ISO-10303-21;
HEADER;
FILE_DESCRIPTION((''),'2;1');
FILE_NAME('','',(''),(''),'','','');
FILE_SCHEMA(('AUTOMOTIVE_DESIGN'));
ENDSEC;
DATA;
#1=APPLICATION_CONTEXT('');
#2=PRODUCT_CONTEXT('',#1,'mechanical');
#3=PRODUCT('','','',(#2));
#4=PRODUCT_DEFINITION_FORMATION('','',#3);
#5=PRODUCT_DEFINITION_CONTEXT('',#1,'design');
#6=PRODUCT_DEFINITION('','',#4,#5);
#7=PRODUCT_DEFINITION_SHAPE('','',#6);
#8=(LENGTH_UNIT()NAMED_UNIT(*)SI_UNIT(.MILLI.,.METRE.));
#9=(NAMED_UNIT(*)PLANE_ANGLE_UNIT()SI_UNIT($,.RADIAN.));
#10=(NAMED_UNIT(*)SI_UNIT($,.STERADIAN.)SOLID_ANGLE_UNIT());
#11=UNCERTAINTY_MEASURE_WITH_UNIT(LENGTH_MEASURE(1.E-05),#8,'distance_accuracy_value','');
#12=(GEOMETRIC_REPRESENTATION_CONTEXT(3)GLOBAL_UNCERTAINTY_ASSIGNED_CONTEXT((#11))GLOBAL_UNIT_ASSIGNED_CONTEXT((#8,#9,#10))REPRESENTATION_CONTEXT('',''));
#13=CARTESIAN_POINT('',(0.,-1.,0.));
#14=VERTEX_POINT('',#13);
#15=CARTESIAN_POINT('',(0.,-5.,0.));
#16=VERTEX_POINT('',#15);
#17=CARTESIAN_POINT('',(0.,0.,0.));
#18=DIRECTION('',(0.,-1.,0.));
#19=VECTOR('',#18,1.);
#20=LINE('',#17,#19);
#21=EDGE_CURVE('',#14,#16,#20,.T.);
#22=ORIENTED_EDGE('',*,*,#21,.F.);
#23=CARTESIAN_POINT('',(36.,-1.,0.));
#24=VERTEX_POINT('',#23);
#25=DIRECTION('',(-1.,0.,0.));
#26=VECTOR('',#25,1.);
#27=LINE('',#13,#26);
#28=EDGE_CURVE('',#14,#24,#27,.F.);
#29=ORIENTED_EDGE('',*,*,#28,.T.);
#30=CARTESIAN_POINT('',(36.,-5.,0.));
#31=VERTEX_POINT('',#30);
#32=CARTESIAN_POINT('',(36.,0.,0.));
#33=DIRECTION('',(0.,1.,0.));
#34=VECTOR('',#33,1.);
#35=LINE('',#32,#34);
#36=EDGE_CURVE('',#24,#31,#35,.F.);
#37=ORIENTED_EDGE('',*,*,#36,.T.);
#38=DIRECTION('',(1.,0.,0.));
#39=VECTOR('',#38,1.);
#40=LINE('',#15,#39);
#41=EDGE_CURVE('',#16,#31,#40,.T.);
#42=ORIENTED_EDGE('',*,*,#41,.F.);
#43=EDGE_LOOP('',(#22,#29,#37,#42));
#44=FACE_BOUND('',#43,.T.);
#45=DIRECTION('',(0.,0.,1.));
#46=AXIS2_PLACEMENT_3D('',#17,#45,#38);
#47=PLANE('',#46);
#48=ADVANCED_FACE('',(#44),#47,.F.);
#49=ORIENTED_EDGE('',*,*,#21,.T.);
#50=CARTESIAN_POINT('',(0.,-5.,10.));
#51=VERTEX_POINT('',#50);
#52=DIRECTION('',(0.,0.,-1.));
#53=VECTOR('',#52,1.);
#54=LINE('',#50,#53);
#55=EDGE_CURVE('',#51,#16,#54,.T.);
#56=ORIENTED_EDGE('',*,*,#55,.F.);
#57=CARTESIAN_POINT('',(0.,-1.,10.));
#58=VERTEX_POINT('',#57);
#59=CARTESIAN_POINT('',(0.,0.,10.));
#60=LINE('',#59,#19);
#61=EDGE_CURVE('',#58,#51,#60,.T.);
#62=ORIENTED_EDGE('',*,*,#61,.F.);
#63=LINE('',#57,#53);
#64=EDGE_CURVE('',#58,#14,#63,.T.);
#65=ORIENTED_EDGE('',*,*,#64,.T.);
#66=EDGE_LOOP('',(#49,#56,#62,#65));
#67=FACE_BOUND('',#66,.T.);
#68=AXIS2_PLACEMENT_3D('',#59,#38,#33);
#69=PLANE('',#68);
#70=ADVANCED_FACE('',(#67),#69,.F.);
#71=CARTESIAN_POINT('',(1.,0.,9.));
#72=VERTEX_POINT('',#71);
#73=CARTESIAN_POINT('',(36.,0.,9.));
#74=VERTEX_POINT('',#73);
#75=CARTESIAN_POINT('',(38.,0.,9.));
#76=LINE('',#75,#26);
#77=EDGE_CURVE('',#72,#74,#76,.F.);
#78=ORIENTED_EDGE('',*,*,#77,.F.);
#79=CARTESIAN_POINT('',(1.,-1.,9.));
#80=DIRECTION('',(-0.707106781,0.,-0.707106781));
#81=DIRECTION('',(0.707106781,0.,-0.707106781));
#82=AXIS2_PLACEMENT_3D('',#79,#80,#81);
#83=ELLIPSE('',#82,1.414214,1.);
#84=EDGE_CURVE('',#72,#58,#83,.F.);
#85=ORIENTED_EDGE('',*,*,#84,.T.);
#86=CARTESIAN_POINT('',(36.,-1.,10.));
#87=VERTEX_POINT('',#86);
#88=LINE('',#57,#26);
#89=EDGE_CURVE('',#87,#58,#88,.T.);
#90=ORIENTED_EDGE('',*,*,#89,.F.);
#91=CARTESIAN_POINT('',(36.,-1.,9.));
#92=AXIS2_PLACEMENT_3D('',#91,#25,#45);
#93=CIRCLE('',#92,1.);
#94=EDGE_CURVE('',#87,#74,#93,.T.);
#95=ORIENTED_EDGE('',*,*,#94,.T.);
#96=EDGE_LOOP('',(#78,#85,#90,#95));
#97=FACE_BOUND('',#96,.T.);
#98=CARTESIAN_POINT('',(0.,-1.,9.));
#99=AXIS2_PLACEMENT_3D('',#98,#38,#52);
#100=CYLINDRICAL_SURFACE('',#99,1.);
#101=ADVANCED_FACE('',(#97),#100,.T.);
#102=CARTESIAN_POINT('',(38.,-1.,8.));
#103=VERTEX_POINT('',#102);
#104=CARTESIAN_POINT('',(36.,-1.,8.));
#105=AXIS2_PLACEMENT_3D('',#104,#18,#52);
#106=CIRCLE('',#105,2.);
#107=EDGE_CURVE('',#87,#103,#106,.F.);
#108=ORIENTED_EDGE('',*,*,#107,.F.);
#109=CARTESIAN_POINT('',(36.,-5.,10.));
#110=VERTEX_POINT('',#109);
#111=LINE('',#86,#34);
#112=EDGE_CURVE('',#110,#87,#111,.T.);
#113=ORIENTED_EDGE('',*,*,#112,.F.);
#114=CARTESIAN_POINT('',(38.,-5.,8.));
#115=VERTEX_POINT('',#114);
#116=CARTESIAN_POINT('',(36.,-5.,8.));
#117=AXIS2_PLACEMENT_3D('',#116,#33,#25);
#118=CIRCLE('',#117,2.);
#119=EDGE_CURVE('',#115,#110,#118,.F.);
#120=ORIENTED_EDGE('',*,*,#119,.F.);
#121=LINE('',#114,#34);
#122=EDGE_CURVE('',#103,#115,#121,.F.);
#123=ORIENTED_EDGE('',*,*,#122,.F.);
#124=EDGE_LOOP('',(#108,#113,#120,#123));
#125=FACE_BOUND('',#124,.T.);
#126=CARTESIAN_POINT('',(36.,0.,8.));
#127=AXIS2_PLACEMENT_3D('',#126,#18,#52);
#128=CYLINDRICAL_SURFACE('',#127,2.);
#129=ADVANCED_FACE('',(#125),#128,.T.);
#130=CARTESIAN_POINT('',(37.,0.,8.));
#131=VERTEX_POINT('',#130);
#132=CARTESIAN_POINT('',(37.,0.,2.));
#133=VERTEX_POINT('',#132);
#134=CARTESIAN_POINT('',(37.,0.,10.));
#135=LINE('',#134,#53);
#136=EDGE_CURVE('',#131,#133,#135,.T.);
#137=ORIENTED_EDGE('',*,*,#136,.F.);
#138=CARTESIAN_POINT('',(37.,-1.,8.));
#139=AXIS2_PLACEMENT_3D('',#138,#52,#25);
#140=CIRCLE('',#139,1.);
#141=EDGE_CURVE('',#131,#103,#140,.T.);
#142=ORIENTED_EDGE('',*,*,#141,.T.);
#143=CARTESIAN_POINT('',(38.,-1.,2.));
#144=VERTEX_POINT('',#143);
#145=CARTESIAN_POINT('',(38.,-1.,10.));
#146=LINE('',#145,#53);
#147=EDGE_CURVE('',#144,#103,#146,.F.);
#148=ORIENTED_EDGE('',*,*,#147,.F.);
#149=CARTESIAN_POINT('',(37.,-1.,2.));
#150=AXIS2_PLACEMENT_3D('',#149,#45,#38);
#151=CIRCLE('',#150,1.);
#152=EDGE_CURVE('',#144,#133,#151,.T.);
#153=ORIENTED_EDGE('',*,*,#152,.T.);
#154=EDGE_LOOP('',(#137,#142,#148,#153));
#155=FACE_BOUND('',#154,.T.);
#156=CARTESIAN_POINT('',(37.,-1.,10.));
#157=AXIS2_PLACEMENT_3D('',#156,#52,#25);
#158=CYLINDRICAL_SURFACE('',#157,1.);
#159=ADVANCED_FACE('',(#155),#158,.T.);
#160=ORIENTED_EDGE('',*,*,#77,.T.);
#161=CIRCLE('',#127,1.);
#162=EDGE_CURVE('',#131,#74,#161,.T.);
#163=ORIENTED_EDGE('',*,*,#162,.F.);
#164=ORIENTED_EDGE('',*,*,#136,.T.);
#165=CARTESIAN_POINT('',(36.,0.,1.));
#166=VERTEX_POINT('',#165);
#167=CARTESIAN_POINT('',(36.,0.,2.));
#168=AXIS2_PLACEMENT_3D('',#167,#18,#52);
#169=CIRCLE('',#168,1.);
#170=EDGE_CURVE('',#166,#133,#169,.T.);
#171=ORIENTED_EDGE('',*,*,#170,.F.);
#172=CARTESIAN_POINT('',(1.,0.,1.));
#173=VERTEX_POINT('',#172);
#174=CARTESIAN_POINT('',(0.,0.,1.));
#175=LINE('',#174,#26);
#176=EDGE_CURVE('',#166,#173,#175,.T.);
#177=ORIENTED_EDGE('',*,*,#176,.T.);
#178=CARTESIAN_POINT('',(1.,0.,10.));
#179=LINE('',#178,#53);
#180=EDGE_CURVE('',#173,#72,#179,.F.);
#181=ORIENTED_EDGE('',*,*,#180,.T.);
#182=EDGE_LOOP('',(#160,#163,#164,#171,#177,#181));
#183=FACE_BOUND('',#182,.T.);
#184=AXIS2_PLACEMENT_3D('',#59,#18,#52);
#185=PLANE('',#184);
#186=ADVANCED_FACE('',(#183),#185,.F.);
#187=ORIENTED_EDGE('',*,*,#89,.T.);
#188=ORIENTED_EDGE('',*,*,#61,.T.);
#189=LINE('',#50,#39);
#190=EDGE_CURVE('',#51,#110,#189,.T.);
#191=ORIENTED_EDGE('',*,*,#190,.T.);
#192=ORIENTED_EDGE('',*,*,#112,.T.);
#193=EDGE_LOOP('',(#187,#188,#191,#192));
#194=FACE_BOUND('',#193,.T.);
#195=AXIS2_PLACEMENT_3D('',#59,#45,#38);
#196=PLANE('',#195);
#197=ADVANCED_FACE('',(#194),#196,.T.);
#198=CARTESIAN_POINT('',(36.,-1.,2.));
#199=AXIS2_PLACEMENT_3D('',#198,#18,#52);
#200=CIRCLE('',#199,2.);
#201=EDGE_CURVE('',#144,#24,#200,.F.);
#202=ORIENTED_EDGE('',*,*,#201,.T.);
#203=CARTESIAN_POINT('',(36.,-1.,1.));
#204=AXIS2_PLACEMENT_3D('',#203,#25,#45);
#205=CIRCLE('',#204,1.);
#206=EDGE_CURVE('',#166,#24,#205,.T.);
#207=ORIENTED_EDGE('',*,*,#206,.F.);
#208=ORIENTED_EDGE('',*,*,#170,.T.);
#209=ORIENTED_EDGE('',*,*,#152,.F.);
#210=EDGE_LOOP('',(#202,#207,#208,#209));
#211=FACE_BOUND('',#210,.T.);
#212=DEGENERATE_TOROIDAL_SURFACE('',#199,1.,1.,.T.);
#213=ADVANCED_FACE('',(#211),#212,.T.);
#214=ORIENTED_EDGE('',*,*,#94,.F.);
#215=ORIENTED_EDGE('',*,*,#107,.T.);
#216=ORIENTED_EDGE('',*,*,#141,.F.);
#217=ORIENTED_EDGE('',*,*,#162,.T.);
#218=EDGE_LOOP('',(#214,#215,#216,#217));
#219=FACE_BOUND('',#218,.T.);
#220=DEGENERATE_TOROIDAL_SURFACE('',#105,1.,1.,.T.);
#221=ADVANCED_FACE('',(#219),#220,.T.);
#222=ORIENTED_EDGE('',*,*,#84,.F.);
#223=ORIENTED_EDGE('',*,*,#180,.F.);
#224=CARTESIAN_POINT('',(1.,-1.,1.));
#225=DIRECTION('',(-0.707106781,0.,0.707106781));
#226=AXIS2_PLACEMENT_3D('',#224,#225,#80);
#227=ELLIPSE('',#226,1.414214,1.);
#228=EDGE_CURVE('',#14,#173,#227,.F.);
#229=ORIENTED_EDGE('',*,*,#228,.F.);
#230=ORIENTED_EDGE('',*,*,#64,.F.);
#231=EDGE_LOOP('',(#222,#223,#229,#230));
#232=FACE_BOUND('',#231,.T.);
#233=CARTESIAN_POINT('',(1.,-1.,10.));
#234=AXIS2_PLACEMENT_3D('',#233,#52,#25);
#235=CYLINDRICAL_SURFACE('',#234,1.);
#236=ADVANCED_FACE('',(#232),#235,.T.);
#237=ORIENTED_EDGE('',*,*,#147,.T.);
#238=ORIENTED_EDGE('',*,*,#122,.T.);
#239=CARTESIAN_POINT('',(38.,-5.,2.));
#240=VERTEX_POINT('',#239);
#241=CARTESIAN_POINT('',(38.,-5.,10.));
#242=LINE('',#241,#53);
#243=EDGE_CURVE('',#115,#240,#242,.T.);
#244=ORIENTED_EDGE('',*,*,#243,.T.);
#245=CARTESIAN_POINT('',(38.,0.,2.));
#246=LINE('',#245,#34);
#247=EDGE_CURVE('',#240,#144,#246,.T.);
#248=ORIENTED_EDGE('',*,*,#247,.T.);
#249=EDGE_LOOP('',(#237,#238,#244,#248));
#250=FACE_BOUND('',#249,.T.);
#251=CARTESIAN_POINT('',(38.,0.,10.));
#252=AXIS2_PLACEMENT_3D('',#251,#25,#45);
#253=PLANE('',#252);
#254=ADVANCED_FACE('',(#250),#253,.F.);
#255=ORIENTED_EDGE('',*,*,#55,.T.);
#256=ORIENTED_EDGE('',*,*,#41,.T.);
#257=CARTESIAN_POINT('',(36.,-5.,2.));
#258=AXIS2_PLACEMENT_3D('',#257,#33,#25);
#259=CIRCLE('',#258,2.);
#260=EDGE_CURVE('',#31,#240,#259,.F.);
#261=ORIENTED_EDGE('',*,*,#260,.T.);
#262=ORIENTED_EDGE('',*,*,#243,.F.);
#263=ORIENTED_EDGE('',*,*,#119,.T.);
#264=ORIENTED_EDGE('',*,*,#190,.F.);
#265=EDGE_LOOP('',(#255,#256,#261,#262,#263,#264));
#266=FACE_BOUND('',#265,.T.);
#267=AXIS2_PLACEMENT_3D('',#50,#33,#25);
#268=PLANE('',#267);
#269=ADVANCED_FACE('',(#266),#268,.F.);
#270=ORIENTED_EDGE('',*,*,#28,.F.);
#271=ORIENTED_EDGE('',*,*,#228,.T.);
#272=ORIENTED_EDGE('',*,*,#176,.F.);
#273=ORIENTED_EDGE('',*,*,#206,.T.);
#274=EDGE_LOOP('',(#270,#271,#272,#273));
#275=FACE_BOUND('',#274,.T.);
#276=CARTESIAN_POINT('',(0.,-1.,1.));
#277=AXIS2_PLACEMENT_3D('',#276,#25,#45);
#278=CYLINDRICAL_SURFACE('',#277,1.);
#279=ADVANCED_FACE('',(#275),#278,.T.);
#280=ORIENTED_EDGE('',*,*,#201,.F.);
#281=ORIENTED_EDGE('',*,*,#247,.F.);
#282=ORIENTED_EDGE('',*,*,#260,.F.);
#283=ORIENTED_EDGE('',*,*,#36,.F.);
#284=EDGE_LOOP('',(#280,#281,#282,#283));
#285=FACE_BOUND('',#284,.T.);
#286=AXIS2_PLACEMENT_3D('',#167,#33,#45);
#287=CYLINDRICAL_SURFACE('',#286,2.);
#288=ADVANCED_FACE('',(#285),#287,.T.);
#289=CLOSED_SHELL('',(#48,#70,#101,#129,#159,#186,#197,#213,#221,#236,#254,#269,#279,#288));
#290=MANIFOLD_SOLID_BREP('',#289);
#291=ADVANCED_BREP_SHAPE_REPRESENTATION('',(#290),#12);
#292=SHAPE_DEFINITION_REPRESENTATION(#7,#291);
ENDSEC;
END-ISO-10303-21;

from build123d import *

# Parameters (mm, degrees)
SCHIZZO1_W                   = 38
SCHIZZO1_H                   = 5
ESTRUSIONE_ESTRUSIONE1_DEPTH = 10
RACCORDO1_R                  = 1
RACCORDO2_R                  = 2


with BuildPart() as part:
    # Schizzo1 → Estrusione-Estrusione1 (new body)
    with BuildSketch(Plane.XY):
        with Locations((19, -2.5)):
            Rectangle(SCHIZZO1_W, SCHIZZO1_H)
    extrude(amount=ESTRUSIONE_ESTRUSIONE1_DEPTH)

    # Raccordo1
    raccordo1_edges = [part.edges().sort_by_distance(p)[0] for p in [
        (19, 0, 10),
        (19, 0, 0),
        (0, 0, 5),
        (38, 0, 5),
    ]]
    fillet(raccordo1_edges, radius=RACCORDO1_R)

    # Raccordo2
    # the kernel refuses this fillet: 2 mm, written as the material it takes off along each edge
    with BuildSketch(Plane(origin=(36, 0, 8), x_dir=(0, 0, 1), z_dir=(-1, 0, 0))) as raccordo2_piece_1:
        with BuildLine():
            CenterArc((1, -1), 1, 0, 90)
            Line((2, -1), (2, 0))
            Line((2, 0), (1, 0))
        make_face()
    revolve(axis=Axis((36, 0, 8), (0, 1, 0)), revolution_arc=90, mode=Mode.SUBTRACT)
    with BuildSketch(Plane(origin=(36, 0, 2), x_dir=(1, 0, 0), z_dir=(0, 0, 1))) as raccordo2_piece_2:
        with BuildLine():
            CenterArc((1, -1), 1, 0, 90)
            Line((2, -1), (2, 0))
            Line((2, 0), (1, 0))
        make_face()
    revolve(axis=Axis((36, 0, 2), (0, 1, 0)), revolution_arc=90, mode=Mode.SUBTRACT)
    with BuildSketch(Plane(origin=(38, 0, 10), x_dir=(-1, 0, 0), z_dir=(0, -1, 0)), Plane(origin=(38, 0, 0), x_dir=(0, 0, 1), z_dir=(0, -1, 0))) as raccordo2_piece_3:
        with BuildLine():
            CenterArc((RACCORDO2_R, RACCORDO2_R), RACCORDO2_R, 180, 90)
            Line((0, RACCORDO2_R), (0, 0))
            Line((0, 0), (RACCORDO2_R, 0))
        make_face()
    extrude(amount=10, mode=Mode.SUBTRACT)


solid = part.part
